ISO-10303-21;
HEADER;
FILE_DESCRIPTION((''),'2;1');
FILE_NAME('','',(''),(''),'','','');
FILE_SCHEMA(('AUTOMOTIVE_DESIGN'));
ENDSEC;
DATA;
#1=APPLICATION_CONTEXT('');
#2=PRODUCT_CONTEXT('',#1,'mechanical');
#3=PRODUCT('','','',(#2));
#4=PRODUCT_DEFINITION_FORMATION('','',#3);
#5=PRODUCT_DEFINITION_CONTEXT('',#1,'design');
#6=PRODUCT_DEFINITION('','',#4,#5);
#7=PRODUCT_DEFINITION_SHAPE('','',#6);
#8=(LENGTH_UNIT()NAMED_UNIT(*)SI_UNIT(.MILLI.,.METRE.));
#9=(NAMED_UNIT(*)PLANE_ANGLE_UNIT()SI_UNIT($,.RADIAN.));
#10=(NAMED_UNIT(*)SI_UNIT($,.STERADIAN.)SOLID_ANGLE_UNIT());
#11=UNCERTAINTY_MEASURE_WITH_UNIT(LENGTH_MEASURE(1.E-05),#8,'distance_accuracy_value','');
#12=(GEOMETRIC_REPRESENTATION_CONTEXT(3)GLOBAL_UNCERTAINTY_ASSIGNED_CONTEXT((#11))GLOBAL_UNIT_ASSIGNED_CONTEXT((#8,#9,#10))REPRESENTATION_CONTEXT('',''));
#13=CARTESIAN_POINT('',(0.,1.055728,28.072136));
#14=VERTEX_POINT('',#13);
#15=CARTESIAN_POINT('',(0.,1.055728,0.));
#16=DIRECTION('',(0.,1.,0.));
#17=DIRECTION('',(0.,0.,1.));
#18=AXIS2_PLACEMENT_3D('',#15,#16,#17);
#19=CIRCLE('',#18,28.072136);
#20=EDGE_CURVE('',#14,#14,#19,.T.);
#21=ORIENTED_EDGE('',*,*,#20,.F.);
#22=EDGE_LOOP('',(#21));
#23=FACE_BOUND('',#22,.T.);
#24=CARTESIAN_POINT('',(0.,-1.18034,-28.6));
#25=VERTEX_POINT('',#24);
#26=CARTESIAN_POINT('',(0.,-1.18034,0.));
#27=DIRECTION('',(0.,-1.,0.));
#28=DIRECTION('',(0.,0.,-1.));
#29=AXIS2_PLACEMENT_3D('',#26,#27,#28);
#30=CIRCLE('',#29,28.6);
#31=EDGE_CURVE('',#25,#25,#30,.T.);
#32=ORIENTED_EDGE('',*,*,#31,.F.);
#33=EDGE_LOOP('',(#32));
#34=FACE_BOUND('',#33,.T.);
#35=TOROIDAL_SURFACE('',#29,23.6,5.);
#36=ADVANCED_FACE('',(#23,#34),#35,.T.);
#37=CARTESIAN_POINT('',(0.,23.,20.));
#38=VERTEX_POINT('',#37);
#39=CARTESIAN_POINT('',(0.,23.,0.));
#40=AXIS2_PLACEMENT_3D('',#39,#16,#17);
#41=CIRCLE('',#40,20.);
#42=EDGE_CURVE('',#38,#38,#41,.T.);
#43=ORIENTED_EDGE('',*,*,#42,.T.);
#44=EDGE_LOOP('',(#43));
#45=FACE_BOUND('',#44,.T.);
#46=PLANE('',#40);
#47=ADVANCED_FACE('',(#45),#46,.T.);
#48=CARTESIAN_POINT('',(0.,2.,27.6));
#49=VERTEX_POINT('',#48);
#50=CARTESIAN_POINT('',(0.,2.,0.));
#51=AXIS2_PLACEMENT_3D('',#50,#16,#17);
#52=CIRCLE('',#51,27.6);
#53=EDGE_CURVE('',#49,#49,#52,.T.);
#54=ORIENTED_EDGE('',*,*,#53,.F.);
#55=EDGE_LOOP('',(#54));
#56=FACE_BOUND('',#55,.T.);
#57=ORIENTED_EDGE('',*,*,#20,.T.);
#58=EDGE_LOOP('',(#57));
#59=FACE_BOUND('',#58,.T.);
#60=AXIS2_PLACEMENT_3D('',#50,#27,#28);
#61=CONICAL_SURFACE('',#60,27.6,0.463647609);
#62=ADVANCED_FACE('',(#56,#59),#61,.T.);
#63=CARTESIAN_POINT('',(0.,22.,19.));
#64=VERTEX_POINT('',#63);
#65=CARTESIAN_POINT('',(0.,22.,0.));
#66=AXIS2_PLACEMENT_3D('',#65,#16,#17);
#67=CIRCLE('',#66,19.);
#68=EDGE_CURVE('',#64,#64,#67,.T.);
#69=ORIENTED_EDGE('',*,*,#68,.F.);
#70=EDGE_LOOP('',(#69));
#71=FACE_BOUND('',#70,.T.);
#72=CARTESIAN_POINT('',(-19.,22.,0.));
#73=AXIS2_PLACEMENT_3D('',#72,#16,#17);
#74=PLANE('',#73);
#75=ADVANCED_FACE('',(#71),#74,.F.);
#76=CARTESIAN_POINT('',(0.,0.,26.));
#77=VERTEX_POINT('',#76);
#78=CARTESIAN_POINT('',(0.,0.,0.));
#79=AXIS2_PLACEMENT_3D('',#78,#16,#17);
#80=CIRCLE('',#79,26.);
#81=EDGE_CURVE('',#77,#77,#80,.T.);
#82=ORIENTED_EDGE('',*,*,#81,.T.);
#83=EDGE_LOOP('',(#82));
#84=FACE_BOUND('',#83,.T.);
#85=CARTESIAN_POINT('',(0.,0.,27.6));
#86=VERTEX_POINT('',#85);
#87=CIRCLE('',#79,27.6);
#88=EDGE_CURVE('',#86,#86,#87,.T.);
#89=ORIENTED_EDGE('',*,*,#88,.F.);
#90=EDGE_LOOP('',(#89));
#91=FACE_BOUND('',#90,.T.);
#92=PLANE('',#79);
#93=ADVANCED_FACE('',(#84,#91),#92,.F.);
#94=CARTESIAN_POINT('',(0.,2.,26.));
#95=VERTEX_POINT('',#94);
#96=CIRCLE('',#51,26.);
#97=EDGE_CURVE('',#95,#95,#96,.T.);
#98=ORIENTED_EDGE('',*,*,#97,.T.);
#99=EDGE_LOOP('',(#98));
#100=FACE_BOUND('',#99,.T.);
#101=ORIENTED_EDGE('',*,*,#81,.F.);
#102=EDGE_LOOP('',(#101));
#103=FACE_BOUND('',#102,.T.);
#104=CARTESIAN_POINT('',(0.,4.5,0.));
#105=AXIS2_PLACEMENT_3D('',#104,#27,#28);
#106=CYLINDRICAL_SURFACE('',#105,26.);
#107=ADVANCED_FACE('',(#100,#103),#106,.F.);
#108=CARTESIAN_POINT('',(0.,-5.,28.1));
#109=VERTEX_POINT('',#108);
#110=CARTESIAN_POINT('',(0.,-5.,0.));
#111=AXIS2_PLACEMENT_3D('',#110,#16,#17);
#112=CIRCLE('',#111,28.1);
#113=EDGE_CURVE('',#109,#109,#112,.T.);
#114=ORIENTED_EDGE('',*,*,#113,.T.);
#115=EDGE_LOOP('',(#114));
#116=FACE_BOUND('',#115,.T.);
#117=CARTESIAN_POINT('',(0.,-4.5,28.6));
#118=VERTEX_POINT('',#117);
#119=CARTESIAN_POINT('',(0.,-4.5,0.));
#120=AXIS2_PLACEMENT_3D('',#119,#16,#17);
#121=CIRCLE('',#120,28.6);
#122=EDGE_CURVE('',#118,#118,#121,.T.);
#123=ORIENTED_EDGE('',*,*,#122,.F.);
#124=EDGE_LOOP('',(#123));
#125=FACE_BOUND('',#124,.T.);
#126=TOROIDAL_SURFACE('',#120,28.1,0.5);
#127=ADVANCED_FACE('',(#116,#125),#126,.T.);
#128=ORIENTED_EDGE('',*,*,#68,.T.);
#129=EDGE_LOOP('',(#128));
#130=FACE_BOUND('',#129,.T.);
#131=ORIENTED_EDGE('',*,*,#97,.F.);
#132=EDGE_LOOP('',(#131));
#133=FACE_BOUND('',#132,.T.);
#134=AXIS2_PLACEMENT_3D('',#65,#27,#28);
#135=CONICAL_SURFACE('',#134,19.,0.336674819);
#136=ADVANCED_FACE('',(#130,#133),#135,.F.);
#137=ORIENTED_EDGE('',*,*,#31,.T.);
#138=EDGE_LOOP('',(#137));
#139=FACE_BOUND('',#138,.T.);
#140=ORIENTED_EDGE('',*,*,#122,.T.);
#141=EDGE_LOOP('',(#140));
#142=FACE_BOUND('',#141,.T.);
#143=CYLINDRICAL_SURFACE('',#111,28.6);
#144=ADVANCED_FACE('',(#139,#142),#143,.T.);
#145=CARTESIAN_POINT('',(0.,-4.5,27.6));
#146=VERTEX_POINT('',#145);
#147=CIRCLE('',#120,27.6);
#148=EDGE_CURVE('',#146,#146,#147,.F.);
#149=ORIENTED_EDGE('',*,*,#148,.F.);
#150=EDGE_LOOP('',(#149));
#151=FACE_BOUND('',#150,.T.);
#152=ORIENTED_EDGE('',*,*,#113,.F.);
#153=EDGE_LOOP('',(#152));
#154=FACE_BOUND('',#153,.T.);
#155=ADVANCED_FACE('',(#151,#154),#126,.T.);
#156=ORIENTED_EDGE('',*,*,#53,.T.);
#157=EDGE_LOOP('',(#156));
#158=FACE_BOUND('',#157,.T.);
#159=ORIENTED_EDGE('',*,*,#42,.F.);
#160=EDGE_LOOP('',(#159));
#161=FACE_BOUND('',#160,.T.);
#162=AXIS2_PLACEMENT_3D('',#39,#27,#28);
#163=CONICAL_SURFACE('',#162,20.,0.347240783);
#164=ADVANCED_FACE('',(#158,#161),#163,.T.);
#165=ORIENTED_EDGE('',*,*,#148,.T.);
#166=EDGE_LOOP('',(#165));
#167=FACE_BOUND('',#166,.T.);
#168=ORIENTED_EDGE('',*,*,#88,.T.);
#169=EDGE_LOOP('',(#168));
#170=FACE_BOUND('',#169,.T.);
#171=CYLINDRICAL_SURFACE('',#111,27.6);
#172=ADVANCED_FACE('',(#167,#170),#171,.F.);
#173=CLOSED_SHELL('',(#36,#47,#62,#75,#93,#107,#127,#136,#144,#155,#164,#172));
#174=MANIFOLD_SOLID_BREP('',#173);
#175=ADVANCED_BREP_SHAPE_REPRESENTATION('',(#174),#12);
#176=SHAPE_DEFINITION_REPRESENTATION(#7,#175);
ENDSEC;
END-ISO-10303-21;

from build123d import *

# Parameters (mm, degrees)
SKETCH33_R          = 28.6
SKETCH33_R_2        = 27.6
BOSS_EXTRUDE7_DEPTH = 5
BOSS_EXTRUDE8_START = 22
SKETCH33_11_R       = 20
BOSS_EXTRUDE8_DEPTH = 1
SKETCH33_12_R       = 27.6
SKETCH33_12_R_2     = 26
BOSS_EXTRUDE9_DEPTH = 2
SKETCH33_14_R       = 26
SKETCH33_14_R_2     = 20
CUT_EXTRUDE1_DEPTH  = 4.5
FILLET1_R           = 0.5
FILLET3_R           = 5


with BuildPart() as part:
    # Sketch33 → Boss-Extrude7 (new body)
    with BuildSketch(Plane(origin=(0, 0, 0), x_dir=(1, 0, 0), z_dir=(0, 1, 0))):
        with Locations(Location((0, 0, 0), (0, 0, 270))):
            Circle(SKETCH33_R)
        with Locations(Location((0, 0, 0), (0, 0, 270))):
            Circle(SKETCH33_R_2, mode=Mode.SUBTRACT)
    extrude(amount=-BOSS_EXTRUDE7_DEPTH)



with BuildPart() as body_2:
    # Sketch33<11> → Boss-Extrude8 (new body)
    with BuildSketch(Plane(origin=(0, 0, 0), x_dir=(1, 0, 0), z_dir=(0, 1, 0)).offset(BOSS_EXTRUDE8_START)):
        with Locations(Location((0, 0, 0), (0, 0, 270))):
            Circle(SKETCH33_11_R)
    extrude(amount=BOSS_EXTRUDE8_DEPTH)


with BuildPart() as body_3:
    # Sketch33<12> → Boss-Extrude9 (new body)
    with BuildSketch(Plane(origin=(0, 0, 0), x_dir=(1, 0, 0), z_dir=(0, 1, 0))):
        with Locations(Location((0, 0, 0), (0, 0, 270))):
            Circle(SKETCH33_12_R)
        with Locations(Location((0, 0, 0), (0, 0, 270))):
            Circle(SKETCH33_12_R_2, mode=Mode.SUBTRACT)
    extrude(amount=BOSS_EXTRUDE9_DEPTH)


with BuildPart() as part_1:
    add(part.part)

    add(body_3.part)  # loft5 joins it to this body
    # loft up to a face of the part (loft5)
    loft([Face(Wire([part_1.edges().sort_by_distance((20.848502744, 0, -19.57804723))[0]])), Face(Wire([part_1.edges().sort_by_distance((20.119534117, 2, -18.893500124))[0]]))])

    # Sketch33<14> → Cut-Extrude1 (cut)
    # profile 1 of 2: a face of its own
    with BuildSketch(Plane(origin=(0, 0, 0), x_dir=(1, 0, 0), z_dir=(0, 1, 0))):
        with Locations(Location((0, 0, 0), (0, 0, 270))):
            Circle(SKETCH33_14_R)
        with Locations(Location((0, 0, 0), (0, 0, 270))):
            Circle(SKETCH33_14_R_2, mode=Mode.SUBTRACT)
    # profile 2 of 2: a face of its own
    with BuildSketch(Plane(origin=(0, 0, 0), x_dir=(1, 0, 0), z_dir=(0, 1, 0))):
        with Locations(Location((0, 0, 0), (0, 0, 270))):
            Circle(SKETCH33_14_R_2)
    extrude(amount=CUT_EXTRUDE1_DEPTH, mode=Mode.SUBTRACT)


    add(body_2.part)  # loft6 joins it to this body
    # loft up to a face of the part (loft6)
    loft([Face(Wire([part_1.edges().sort_by_distance((20.119534117, 2, -18.893500124))[0]])), Face(Wire([part_1.edges().sort_by_distance((14.579372548, 23, -13.690942119))[0]]))])

    # Sketch35 → Cut-Revolve4 (revolve, cut)
    with BuildSketch(Plane.XY, mode=Mode.PRIVATE) as cut_revolve4_sk:
        Polygon((-26, 2), (-19, 22), (0, 22), (0, 2), align=None)
    revolve(cut_revolve4_sk.sketch.rotate(Axis((0, 22, 0), (0, -1, 0)), 270), axis=Axis((0, 22, 0), (0, -1, 0)), mode=Mode.SUBTRACT)

    # Fillet1
    fillet1_edges = [part_1.edges().sort_by_distance(p)[0] for p in [
        (0, -5, -28.6),
        (0, -5, -27.6),
    ]]
    fillet(fillet1_edges, radius=FILLET1_R - 0.0001)  # a hair under: the kernel refuses the full size

    # Fillet3
    fillet3_edges = [part_1.edges().sort_by_distance(p)[0] for p in [
        (0, 0, -28.6),
    ]]
    fillet(fillet3_edges, radius=FILLET3_R)


solid = part_1.part
